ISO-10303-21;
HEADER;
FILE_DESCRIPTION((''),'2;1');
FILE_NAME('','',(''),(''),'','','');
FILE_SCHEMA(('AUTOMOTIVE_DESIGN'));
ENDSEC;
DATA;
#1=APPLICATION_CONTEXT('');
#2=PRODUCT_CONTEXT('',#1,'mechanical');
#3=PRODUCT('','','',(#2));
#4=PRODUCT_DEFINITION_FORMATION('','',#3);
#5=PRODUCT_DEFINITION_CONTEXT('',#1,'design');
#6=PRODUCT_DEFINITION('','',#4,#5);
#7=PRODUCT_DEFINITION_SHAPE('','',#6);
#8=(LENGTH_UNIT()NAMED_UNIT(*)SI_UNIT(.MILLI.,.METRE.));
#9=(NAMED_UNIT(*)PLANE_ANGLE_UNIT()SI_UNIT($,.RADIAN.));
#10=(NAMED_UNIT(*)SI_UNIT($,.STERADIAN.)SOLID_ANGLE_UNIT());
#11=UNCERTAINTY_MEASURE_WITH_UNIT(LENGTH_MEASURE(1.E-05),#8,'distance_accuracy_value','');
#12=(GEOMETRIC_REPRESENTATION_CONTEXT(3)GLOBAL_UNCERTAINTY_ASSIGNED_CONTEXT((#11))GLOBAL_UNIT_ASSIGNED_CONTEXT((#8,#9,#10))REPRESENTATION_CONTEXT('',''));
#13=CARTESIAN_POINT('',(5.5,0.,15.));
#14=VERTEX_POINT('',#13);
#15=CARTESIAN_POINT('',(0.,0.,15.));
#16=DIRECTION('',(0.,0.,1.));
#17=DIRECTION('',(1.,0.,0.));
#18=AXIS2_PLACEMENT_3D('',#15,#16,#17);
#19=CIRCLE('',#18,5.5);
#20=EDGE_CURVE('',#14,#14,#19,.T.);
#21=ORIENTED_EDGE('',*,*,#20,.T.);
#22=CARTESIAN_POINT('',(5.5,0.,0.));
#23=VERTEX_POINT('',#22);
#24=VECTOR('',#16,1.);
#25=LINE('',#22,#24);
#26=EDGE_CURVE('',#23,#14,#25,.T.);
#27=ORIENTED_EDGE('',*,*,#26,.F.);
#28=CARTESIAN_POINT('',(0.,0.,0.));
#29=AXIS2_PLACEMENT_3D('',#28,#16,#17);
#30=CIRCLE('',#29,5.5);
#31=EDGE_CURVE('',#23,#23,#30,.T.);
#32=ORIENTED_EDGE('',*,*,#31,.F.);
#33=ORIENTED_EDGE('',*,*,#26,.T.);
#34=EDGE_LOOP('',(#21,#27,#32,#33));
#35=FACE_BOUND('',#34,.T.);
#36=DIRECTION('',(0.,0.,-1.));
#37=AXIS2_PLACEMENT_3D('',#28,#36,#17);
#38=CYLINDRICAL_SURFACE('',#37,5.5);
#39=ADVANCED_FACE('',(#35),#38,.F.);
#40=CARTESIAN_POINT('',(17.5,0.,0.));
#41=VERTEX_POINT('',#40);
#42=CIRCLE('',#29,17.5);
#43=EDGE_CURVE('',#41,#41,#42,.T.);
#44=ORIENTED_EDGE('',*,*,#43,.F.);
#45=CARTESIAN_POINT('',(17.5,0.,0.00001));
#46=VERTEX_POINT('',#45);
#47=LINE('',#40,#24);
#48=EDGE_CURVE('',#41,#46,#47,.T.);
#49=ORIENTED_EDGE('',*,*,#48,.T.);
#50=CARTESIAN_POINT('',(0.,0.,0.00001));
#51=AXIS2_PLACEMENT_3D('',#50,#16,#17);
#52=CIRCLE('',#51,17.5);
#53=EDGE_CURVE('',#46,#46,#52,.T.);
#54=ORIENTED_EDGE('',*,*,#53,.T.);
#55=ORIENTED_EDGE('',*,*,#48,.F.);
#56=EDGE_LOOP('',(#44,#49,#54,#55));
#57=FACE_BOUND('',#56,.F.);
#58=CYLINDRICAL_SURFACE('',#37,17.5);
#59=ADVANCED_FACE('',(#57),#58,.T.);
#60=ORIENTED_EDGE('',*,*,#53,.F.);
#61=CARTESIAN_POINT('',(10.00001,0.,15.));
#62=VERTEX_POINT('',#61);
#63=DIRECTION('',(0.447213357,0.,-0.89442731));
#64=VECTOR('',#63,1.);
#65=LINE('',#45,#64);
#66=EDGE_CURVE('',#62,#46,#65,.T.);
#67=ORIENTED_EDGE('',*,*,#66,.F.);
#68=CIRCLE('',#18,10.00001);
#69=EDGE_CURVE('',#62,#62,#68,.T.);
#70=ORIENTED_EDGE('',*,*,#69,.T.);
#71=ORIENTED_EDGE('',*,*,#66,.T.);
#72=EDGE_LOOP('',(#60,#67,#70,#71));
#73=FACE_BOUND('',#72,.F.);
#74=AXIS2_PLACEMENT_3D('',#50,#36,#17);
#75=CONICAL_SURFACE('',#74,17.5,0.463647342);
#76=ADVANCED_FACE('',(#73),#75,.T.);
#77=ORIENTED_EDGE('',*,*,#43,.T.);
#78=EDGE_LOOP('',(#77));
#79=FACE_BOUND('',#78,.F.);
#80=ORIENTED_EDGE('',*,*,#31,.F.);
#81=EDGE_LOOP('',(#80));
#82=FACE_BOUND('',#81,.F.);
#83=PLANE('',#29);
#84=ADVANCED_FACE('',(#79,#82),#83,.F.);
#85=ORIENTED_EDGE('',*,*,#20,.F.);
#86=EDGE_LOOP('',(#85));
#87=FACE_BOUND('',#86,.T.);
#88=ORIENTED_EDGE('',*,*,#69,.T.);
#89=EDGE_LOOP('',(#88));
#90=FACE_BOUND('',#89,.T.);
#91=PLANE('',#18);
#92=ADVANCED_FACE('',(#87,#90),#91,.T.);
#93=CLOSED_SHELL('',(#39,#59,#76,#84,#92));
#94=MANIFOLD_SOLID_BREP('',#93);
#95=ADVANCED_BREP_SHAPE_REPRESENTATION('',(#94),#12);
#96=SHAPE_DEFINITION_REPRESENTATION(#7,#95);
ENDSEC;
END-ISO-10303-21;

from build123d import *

# Parameters (mm, degrees)
F0_R     = 17.5
F0_R_2   = 10
F0_R_3   = 5.5
F1_DEPTH = 15
F2_SIZE2 = 14.99999
F2_SIZE  = 7.49999


# Not quite as in the source:
# - a fillet or chamfer is up to 0.001 mm smaller than in the source, because OpenCascade refuses the exact size


with BuildPart() as f1:
    # F0 (on Top) → F1 (new body)
    with BuildSketch(Plane.XY):
        Circle(F0_R)
        Circle(F0_R_2, mode=Mode.SUBTRACT)
        Circle(F0_R_2)
        Circle(F0_R_3, mode=Mode.SUBTRACT)
    extrude(amount=F1_DEPTH)

    # F2 (size 7.5 and 15 in the source; OpenCascade refuses exactly that, so slightly less here)
    f2_edges = [f1.edges().sort_by_distance(p)[0] for p in [
        (-17.5, 0, 15),
    ]]
    f2_side = f1.faces().sort_by_distance((-17.005025, 0, 15))[0]
    chamfer(f2_edges, length=F2_SIZE, length2=F2_SIZE2, reference=f2_side)


solid = f1.part
